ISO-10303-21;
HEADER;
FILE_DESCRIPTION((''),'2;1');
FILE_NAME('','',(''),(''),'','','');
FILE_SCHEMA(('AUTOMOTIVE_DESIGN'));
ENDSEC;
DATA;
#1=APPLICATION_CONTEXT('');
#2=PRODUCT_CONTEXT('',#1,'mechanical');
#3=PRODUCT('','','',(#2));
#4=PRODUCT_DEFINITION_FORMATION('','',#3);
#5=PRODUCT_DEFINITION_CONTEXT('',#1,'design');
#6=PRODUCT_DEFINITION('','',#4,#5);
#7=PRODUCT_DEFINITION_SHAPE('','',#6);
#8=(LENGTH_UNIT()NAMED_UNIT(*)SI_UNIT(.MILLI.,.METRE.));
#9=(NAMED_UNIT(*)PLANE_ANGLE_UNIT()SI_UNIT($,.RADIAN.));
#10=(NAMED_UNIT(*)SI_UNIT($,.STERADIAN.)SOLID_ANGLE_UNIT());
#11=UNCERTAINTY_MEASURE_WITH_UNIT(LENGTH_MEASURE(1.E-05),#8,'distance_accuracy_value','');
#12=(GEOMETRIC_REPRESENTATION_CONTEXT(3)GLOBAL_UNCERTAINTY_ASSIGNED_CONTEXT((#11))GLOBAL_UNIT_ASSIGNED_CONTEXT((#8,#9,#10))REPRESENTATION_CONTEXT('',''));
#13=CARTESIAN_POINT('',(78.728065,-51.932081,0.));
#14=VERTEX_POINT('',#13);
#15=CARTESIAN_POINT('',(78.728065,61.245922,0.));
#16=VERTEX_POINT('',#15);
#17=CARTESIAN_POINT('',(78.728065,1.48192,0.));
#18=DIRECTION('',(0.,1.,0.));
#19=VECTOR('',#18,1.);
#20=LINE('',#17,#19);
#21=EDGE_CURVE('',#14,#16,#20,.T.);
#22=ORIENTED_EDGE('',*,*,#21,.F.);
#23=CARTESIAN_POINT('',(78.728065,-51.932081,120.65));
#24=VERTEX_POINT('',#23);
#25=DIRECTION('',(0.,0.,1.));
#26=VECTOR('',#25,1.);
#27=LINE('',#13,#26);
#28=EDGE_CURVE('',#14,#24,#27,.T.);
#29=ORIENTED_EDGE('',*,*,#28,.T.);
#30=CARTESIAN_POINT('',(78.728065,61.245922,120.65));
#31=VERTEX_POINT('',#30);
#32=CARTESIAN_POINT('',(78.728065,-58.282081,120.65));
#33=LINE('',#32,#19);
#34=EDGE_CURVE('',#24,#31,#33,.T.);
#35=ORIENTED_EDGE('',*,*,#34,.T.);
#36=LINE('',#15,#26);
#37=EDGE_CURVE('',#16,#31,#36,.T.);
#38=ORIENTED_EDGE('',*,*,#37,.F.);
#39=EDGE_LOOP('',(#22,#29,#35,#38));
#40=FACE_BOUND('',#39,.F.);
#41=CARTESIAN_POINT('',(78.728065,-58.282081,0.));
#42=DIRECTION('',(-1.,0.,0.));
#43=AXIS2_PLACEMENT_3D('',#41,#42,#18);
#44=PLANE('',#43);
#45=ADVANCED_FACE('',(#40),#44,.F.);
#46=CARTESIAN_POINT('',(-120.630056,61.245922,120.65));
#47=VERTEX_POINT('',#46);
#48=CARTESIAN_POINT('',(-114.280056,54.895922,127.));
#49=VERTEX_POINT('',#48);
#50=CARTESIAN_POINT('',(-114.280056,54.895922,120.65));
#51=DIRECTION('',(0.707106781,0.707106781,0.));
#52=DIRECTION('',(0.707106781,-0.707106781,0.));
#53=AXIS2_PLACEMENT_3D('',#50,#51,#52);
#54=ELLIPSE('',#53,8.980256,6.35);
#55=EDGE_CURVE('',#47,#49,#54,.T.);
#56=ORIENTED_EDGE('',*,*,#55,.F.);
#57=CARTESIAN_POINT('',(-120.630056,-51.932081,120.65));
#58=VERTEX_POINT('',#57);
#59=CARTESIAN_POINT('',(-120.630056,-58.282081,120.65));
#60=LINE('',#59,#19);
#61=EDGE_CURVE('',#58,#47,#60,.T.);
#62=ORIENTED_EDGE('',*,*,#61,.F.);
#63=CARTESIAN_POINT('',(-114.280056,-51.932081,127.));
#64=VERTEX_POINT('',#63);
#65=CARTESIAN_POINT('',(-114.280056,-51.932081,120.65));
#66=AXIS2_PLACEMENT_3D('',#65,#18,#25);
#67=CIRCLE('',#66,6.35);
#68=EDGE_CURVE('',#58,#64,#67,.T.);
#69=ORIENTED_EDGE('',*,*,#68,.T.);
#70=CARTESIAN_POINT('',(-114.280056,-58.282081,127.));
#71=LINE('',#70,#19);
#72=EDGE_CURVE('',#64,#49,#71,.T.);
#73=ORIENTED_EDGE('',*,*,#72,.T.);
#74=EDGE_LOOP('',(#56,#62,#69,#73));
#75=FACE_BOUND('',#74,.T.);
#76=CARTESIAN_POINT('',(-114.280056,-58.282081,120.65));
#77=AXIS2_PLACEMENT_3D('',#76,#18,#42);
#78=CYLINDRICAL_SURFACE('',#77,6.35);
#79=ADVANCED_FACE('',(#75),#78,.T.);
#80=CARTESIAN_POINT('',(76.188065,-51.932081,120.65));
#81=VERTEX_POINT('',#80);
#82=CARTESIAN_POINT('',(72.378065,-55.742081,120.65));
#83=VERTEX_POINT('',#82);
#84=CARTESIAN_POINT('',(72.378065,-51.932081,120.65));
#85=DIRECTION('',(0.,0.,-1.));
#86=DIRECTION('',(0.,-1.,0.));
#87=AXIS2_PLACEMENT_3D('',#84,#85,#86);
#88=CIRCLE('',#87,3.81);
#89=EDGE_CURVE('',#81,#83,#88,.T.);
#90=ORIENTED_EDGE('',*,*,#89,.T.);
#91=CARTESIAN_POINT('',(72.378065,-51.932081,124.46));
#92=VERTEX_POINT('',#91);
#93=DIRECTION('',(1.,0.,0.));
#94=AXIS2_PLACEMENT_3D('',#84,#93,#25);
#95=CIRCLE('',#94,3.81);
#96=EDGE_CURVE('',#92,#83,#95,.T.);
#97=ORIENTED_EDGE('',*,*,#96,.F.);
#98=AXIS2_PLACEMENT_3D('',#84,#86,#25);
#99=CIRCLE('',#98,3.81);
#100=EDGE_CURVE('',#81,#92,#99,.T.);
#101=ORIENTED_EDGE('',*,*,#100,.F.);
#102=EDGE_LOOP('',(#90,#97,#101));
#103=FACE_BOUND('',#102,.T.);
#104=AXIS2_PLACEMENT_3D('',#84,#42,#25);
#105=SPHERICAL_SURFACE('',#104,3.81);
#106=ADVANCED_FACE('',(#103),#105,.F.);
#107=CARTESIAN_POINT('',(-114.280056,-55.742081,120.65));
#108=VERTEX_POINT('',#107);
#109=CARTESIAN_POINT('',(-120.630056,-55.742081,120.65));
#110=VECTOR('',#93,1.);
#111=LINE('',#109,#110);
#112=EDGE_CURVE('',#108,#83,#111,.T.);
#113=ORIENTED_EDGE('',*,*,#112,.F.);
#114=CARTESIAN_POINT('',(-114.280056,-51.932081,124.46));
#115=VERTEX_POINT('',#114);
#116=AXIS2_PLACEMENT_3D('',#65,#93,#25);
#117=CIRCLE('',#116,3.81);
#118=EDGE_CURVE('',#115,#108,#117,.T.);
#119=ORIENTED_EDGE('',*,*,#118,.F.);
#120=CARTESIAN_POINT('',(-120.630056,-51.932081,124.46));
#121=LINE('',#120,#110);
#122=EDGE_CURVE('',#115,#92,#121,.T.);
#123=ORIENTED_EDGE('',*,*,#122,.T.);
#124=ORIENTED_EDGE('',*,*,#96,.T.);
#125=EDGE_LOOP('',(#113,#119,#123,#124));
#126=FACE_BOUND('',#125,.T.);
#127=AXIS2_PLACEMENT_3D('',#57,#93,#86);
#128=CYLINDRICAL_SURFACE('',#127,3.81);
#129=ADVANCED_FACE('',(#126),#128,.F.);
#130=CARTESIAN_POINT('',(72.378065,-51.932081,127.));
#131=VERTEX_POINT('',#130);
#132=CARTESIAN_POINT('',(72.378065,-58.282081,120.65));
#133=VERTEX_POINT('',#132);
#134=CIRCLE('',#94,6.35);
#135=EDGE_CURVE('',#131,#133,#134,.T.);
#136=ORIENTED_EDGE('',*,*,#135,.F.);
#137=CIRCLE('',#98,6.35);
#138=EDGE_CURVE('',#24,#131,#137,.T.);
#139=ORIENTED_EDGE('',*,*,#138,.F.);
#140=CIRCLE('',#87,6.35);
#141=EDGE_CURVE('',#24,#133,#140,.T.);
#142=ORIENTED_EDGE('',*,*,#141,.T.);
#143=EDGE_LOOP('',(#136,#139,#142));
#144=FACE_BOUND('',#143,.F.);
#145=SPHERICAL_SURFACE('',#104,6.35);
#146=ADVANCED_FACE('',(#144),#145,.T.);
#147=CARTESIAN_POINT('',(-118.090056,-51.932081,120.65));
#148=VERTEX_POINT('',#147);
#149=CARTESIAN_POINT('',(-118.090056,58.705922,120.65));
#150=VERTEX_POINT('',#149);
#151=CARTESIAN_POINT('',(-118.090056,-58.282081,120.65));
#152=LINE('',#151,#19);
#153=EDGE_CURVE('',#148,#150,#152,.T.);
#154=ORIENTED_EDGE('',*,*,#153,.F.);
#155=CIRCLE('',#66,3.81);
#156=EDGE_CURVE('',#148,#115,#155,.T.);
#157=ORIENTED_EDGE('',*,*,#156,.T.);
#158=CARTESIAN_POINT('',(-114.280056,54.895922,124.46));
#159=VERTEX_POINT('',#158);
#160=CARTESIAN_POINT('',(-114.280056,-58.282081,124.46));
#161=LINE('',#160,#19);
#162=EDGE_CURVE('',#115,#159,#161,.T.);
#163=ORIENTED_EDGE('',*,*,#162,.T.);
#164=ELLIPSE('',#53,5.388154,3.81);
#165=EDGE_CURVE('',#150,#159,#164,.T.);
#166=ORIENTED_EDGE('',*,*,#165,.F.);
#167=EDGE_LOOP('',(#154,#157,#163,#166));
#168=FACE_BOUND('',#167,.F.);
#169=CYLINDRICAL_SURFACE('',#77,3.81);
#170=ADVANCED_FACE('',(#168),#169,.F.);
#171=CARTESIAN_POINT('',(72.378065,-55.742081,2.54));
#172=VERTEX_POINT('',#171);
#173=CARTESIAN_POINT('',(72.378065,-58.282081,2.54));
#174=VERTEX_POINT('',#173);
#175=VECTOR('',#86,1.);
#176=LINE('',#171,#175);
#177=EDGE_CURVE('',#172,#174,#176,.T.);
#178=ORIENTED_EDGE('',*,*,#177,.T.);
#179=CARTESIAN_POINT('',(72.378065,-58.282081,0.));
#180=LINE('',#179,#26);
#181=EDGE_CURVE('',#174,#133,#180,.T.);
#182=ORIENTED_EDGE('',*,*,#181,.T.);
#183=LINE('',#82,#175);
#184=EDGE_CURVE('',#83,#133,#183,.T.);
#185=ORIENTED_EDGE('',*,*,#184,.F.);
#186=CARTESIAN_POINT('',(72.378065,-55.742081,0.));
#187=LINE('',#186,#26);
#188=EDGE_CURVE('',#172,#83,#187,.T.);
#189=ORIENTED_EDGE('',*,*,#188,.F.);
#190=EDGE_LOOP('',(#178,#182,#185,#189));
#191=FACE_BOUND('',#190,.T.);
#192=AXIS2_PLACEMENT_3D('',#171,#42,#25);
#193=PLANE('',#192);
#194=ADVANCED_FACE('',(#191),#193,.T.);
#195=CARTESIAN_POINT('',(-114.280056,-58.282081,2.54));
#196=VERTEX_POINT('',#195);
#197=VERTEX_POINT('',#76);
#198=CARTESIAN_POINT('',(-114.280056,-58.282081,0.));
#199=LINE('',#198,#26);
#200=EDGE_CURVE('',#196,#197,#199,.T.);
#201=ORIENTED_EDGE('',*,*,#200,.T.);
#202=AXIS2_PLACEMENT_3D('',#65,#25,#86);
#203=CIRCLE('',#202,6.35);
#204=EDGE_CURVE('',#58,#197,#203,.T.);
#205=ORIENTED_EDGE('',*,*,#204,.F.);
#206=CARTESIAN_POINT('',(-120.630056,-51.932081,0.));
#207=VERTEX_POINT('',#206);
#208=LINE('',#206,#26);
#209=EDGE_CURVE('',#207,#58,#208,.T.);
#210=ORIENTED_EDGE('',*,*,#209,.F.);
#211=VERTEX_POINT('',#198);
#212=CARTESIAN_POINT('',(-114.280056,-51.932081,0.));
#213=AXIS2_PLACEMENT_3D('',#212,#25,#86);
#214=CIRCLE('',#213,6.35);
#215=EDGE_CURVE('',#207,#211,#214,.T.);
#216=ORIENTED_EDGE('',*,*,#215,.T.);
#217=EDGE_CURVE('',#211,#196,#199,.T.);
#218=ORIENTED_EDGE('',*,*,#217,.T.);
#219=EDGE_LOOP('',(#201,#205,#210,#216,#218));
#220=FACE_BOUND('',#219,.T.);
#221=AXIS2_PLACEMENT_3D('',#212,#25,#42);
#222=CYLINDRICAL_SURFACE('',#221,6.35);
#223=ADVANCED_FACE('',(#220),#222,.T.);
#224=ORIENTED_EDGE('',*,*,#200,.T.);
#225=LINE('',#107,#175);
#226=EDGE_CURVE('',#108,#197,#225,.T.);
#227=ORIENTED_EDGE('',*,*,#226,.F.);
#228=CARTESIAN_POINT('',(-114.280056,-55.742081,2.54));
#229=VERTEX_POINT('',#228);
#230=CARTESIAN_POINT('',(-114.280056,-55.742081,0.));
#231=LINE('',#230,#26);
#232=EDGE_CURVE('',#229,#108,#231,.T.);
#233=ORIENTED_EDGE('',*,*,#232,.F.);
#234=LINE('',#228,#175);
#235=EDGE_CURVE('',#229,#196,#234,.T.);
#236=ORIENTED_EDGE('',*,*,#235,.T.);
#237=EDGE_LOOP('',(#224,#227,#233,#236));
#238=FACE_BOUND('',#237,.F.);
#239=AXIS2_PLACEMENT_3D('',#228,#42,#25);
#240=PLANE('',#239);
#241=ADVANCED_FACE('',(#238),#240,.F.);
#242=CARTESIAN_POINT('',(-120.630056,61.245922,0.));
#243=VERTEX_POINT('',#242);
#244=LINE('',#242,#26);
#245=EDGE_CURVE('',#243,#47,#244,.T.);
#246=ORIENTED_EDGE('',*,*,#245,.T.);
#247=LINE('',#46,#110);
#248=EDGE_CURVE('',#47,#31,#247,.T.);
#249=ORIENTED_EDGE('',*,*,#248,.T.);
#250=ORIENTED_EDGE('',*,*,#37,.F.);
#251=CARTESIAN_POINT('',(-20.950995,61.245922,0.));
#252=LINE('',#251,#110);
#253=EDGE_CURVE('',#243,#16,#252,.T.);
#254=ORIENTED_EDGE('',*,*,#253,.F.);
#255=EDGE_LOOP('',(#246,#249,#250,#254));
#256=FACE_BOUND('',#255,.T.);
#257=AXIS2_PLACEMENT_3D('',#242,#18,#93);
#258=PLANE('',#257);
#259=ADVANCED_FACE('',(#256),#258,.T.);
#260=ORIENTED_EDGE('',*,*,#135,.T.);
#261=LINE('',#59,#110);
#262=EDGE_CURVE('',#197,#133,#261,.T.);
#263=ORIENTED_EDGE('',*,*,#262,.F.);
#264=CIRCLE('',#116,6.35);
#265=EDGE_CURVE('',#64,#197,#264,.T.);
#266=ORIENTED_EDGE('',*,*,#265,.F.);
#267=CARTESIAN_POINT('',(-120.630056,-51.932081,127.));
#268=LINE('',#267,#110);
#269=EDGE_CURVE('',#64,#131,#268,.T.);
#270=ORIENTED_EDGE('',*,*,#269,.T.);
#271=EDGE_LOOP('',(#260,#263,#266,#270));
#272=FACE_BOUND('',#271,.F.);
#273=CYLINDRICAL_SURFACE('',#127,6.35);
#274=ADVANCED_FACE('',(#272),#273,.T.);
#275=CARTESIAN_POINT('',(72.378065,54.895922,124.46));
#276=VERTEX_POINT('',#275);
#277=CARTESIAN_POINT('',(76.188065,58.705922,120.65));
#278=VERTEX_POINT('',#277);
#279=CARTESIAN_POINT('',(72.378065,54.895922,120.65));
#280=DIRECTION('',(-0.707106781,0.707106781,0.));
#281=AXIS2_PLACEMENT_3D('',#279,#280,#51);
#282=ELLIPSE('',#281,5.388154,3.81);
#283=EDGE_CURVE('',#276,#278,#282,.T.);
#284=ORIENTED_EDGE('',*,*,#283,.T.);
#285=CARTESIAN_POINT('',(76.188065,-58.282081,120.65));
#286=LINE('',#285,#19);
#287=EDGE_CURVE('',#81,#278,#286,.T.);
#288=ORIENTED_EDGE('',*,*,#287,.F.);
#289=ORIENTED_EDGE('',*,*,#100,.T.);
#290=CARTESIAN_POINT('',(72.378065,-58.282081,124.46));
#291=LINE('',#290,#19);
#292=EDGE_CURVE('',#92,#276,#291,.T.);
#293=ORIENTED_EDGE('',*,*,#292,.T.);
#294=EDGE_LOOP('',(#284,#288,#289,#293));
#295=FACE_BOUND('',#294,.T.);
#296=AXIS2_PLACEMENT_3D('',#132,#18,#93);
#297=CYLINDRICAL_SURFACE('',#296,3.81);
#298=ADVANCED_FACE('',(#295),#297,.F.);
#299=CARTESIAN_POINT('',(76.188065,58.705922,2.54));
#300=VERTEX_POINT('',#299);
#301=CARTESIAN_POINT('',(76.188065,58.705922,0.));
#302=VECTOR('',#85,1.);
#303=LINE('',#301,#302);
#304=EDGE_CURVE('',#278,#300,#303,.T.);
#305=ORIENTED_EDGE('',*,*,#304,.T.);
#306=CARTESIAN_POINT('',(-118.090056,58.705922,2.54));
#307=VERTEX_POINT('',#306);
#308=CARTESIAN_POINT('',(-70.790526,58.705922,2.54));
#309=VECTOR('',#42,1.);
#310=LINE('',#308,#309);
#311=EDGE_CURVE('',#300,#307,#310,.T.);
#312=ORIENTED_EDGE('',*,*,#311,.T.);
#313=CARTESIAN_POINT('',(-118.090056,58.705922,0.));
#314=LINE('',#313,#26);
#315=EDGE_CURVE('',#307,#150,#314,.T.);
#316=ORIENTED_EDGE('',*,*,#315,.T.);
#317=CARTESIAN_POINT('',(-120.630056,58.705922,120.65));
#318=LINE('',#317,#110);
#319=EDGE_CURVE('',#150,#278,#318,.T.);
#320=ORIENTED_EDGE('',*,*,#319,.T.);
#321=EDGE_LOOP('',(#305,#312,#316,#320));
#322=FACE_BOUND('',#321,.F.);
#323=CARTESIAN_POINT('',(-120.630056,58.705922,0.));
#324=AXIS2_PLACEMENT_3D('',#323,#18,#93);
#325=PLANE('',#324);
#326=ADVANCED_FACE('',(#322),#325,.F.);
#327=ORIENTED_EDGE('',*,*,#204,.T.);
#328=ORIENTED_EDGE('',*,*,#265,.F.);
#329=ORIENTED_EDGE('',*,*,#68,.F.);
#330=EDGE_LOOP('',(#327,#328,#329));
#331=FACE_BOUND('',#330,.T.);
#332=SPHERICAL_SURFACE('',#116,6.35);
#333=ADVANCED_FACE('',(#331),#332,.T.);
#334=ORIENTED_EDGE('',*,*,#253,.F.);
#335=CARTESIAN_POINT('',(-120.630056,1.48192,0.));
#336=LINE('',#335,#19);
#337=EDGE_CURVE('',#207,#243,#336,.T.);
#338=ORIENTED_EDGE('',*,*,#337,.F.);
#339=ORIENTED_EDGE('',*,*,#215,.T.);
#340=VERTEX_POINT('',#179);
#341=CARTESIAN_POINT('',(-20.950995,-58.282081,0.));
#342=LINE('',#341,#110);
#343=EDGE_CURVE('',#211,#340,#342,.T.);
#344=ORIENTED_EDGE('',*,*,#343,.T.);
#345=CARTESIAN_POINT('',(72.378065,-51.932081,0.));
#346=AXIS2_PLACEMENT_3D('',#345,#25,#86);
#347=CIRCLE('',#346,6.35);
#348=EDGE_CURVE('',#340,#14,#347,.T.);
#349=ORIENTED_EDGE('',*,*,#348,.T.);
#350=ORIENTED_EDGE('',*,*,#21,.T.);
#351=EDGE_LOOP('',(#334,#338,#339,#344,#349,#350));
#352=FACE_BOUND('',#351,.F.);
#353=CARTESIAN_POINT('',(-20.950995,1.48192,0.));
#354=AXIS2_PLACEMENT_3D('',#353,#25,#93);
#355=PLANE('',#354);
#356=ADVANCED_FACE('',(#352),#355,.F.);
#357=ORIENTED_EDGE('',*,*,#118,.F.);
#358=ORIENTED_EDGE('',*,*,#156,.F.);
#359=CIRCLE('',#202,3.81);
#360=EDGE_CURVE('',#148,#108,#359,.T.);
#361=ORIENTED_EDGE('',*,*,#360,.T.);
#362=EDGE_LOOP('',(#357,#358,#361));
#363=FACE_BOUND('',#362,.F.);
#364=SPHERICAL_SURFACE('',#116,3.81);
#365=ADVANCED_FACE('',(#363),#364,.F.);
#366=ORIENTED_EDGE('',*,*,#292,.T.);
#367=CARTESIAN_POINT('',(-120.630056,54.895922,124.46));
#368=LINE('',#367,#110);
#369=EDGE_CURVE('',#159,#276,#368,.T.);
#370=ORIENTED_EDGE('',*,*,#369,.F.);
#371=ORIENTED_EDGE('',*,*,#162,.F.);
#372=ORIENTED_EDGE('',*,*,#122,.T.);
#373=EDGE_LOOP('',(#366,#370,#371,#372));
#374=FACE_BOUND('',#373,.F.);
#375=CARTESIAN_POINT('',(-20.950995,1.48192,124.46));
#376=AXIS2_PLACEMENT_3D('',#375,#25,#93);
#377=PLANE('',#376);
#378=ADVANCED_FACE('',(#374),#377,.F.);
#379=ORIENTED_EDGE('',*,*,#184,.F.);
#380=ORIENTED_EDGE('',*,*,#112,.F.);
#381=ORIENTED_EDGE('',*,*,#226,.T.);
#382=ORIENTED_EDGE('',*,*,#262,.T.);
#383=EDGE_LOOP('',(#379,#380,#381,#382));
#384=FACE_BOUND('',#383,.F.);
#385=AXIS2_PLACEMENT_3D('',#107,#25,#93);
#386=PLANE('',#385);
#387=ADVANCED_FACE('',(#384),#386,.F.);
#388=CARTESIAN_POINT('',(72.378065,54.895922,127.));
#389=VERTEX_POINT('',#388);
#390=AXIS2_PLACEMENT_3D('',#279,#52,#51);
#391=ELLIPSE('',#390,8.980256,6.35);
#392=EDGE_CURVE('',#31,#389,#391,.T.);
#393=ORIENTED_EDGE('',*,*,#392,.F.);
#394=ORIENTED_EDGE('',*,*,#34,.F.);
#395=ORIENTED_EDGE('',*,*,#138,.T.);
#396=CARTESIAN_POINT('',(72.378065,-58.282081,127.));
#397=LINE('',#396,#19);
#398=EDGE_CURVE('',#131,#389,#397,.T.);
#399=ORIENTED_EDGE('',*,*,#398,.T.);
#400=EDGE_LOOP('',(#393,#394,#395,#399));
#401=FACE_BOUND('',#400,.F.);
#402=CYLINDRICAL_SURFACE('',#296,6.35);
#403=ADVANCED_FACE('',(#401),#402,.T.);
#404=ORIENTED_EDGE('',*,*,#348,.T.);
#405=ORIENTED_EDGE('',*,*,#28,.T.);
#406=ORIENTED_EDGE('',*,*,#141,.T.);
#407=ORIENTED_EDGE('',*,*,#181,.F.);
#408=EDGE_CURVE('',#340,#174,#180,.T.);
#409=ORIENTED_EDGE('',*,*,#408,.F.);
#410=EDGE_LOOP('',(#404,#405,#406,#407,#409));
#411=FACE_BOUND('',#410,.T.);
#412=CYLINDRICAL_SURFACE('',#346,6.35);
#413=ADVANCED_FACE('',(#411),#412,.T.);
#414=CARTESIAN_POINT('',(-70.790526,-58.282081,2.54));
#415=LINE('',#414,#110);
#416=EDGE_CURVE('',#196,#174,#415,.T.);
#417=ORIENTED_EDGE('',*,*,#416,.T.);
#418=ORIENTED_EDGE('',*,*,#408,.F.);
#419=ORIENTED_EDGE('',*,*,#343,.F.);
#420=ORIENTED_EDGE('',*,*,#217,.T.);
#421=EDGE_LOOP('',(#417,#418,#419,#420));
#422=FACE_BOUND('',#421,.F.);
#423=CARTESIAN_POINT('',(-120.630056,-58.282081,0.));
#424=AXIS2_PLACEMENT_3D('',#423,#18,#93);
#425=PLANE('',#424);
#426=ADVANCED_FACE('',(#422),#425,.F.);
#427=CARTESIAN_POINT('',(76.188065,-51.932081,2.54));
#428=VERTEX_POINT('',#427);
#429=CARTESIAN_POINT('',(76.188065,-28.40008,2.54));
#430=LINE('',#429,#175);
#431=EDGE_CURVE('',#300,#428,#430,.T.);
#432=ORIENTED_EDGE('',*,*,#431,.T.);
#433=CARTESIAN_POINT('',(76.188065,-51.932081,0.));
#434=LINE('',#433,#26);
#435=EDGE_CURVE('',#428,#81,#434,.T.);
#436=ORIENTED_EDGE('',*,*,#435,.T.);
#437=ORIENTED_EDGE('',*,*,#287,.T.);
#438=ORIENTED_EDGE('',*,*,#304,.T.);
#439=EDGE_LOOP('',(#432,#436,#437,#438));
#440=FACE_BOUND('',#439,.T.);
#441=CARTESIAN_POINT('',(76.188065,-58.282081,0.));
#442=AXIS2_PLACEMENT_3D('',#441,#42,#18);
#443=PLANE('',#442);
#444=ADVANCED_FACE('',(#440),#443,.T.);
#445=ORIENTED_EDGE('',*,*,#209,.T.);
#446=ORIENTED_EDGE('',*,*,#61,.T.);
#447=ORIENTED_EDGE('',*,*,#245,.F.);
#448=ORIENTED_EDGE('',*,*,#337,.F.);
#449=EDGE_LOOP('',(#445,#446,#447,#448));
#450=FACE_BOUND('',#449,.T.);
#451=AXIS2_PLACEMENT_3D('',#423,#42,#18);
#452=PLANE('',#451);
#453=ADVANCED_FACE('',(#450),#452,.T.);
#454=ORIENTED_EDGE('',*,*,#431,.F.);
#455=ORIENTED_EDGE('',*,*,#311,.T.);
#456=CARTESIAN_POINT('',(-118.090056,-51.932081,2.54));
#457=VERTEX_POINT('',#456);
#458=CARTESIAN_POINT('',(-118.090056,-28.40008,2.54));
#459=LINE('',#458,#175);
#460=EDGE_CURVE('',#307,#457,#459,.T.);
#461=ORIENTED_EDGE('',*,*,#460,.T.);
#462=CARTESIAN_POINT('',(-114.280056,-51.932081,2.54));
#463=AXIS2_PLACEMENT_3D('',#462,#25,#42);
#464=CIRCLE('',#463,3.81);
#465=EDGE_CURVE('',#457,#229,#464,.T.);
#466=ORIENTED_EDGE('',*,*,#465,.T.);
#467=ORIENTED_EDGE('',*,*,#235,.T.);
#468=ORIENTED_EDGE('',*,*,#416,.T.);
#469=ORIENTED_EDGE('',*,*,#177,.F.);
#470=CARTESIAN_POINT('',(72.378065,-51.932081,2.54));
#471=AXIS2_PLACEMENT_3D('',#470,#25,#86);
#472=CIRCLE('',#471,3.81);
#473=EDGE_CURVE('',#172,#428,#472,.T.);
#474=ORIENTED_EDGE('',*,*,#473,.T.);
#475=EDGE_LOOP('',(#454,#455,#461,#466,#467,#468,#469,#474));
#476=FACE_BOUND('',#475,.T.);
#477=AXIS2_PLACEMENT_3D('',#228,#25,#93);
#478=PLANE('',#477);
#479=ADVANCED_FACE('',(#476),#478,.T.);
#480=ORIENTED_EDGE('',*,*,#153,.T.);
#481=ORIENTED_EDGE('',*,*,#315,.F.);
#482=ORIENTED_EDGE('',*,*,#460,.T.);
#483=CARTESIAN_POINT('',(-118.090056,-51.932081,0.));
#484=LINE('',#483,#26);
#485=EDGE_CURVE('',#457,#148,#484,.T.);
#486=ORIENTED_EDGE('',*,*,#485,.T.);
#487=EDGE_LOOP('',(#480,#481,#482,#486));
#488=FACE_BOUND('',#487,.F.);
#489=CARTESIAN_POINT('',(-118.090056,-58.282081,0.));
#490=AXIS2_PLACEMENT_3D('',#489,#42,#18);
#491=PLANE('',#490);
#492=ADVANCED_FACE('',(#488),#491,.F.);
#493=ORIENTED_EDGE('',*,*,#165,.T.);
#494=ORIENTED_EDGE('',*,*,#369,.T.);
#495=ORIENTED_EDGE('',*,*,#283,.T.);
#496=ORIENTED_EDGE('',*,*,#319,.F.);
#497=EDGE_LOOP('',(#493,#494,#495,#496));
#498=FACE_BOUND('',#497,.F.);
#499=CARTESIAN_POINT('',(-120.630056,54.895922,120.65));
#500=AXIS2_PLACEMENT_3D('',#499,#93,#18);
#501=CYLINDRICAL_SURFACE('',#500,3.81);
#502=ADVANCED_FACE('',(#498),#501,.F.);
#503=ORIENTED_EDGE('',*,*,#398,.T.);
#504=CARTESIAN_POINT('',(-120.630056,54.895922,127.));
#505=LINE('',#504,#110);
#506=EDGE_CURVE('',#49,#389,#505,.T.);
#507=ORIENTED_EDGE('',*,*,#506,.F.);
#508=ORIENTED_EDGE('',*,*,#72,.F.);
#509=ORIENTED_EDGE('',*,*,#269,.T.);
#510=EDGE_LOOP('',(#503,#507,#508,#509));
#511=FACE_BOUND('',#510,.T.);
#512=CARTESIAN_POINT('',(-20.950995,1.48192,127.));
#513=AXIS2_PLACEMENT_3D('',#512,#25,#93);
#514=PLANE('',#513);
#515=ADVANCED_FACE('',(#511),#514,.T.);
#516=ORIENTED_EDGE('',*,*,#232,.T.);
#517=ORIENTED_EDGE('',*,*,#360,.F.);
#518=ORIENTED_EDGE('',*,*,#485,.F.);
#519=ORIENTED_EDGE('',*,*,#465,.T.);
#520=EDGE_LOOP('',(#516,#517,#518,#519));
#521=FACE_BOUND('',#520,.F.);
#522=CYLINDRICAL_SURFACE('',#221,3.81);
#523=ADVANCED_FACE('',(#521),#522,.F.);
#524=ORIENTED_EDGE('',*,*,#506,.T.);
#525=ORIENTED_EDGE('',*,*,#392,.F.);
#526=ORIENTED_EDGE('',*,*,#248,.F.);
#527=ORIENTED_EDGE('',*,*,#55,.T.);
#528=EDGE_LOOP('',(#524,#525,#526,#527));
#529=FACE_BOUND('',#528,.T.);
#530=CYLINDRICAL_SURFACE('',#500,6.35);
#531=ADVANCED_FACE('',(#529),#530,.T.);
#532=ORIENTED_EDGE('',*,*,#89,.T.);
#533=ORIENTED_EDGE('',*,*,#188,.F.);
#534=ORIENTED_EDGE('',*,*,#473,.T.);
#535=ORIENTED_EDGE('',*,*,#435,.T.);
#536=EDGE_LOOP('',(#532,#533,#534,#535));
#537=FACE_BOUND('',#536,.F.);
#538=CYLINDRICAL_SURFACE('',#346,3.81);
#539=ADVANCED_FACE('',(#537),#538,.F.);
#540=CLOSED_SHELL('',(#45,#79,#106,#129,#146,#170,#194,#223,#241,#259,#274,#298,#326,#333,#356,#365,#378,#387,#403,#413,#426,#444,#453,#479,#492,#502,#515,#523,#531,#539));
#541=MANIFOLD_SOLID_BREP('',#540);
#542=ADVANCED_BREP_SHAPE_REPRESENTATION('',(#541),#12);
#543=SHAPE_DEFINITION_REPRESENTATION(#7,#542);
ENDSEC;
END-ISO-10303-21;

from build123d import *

# Parameters (mm, degrees)
F0_W     = 199.3581205606
F0_H     = 119.528003037
F1_DEPTH = 127
F2_R     = 6.35
F3_T     = -2.54


# Not quite as in the source:
# - a shell that OpenCascade refuses in one call is made with other operations: the cavity is built on its own and cut out


with BuildPart() as f1:
    # F0 (on Top) → F1 (new body)
    with BuildSketch(Plane.XY):
        with Locations((-20.9509953856, 1.4819204807)):
            Rectangle(F0_W, F0_H)
    extrude(amount=F1_DEPTH)

    # F2
    f2_edges = [f1.edges().sort_by_distance(p)[0] for p in [
        (-20.950995, -58.282081, 127),
        (78.728065, 1.48192, 127),
        (-20.950995, 61.245922, 127),
        (-120.630056, 1.48192, 127),
        (-120.630056, -58.282081, 63.5),
        (78.728065, -58.282081, 63.5),
    ]]
    fillet(f2_edges, radius=F2_R)

    # F3: a shell. OpenCascade refuses it in one call, so the cavity is built on its own and cut out:
    # the body offset inwards by the wall thickness, plus a prism from it out through each open face.
    f3_core = offset(f1.part, amount=F3_T, mode=Mode.PRIVATE)
    f3_exits = [f3_core.faces().sort_by_distance(p)[0] for p in [
        (-20.950995, -55.742081, 61.595),
    ]]
    add(f3_core, mode=Mode.SUBTRACT)
    extrude(f3_exits, amount=-F3_T, mode=Mode.SUBTRACT)


solid = f1.part
